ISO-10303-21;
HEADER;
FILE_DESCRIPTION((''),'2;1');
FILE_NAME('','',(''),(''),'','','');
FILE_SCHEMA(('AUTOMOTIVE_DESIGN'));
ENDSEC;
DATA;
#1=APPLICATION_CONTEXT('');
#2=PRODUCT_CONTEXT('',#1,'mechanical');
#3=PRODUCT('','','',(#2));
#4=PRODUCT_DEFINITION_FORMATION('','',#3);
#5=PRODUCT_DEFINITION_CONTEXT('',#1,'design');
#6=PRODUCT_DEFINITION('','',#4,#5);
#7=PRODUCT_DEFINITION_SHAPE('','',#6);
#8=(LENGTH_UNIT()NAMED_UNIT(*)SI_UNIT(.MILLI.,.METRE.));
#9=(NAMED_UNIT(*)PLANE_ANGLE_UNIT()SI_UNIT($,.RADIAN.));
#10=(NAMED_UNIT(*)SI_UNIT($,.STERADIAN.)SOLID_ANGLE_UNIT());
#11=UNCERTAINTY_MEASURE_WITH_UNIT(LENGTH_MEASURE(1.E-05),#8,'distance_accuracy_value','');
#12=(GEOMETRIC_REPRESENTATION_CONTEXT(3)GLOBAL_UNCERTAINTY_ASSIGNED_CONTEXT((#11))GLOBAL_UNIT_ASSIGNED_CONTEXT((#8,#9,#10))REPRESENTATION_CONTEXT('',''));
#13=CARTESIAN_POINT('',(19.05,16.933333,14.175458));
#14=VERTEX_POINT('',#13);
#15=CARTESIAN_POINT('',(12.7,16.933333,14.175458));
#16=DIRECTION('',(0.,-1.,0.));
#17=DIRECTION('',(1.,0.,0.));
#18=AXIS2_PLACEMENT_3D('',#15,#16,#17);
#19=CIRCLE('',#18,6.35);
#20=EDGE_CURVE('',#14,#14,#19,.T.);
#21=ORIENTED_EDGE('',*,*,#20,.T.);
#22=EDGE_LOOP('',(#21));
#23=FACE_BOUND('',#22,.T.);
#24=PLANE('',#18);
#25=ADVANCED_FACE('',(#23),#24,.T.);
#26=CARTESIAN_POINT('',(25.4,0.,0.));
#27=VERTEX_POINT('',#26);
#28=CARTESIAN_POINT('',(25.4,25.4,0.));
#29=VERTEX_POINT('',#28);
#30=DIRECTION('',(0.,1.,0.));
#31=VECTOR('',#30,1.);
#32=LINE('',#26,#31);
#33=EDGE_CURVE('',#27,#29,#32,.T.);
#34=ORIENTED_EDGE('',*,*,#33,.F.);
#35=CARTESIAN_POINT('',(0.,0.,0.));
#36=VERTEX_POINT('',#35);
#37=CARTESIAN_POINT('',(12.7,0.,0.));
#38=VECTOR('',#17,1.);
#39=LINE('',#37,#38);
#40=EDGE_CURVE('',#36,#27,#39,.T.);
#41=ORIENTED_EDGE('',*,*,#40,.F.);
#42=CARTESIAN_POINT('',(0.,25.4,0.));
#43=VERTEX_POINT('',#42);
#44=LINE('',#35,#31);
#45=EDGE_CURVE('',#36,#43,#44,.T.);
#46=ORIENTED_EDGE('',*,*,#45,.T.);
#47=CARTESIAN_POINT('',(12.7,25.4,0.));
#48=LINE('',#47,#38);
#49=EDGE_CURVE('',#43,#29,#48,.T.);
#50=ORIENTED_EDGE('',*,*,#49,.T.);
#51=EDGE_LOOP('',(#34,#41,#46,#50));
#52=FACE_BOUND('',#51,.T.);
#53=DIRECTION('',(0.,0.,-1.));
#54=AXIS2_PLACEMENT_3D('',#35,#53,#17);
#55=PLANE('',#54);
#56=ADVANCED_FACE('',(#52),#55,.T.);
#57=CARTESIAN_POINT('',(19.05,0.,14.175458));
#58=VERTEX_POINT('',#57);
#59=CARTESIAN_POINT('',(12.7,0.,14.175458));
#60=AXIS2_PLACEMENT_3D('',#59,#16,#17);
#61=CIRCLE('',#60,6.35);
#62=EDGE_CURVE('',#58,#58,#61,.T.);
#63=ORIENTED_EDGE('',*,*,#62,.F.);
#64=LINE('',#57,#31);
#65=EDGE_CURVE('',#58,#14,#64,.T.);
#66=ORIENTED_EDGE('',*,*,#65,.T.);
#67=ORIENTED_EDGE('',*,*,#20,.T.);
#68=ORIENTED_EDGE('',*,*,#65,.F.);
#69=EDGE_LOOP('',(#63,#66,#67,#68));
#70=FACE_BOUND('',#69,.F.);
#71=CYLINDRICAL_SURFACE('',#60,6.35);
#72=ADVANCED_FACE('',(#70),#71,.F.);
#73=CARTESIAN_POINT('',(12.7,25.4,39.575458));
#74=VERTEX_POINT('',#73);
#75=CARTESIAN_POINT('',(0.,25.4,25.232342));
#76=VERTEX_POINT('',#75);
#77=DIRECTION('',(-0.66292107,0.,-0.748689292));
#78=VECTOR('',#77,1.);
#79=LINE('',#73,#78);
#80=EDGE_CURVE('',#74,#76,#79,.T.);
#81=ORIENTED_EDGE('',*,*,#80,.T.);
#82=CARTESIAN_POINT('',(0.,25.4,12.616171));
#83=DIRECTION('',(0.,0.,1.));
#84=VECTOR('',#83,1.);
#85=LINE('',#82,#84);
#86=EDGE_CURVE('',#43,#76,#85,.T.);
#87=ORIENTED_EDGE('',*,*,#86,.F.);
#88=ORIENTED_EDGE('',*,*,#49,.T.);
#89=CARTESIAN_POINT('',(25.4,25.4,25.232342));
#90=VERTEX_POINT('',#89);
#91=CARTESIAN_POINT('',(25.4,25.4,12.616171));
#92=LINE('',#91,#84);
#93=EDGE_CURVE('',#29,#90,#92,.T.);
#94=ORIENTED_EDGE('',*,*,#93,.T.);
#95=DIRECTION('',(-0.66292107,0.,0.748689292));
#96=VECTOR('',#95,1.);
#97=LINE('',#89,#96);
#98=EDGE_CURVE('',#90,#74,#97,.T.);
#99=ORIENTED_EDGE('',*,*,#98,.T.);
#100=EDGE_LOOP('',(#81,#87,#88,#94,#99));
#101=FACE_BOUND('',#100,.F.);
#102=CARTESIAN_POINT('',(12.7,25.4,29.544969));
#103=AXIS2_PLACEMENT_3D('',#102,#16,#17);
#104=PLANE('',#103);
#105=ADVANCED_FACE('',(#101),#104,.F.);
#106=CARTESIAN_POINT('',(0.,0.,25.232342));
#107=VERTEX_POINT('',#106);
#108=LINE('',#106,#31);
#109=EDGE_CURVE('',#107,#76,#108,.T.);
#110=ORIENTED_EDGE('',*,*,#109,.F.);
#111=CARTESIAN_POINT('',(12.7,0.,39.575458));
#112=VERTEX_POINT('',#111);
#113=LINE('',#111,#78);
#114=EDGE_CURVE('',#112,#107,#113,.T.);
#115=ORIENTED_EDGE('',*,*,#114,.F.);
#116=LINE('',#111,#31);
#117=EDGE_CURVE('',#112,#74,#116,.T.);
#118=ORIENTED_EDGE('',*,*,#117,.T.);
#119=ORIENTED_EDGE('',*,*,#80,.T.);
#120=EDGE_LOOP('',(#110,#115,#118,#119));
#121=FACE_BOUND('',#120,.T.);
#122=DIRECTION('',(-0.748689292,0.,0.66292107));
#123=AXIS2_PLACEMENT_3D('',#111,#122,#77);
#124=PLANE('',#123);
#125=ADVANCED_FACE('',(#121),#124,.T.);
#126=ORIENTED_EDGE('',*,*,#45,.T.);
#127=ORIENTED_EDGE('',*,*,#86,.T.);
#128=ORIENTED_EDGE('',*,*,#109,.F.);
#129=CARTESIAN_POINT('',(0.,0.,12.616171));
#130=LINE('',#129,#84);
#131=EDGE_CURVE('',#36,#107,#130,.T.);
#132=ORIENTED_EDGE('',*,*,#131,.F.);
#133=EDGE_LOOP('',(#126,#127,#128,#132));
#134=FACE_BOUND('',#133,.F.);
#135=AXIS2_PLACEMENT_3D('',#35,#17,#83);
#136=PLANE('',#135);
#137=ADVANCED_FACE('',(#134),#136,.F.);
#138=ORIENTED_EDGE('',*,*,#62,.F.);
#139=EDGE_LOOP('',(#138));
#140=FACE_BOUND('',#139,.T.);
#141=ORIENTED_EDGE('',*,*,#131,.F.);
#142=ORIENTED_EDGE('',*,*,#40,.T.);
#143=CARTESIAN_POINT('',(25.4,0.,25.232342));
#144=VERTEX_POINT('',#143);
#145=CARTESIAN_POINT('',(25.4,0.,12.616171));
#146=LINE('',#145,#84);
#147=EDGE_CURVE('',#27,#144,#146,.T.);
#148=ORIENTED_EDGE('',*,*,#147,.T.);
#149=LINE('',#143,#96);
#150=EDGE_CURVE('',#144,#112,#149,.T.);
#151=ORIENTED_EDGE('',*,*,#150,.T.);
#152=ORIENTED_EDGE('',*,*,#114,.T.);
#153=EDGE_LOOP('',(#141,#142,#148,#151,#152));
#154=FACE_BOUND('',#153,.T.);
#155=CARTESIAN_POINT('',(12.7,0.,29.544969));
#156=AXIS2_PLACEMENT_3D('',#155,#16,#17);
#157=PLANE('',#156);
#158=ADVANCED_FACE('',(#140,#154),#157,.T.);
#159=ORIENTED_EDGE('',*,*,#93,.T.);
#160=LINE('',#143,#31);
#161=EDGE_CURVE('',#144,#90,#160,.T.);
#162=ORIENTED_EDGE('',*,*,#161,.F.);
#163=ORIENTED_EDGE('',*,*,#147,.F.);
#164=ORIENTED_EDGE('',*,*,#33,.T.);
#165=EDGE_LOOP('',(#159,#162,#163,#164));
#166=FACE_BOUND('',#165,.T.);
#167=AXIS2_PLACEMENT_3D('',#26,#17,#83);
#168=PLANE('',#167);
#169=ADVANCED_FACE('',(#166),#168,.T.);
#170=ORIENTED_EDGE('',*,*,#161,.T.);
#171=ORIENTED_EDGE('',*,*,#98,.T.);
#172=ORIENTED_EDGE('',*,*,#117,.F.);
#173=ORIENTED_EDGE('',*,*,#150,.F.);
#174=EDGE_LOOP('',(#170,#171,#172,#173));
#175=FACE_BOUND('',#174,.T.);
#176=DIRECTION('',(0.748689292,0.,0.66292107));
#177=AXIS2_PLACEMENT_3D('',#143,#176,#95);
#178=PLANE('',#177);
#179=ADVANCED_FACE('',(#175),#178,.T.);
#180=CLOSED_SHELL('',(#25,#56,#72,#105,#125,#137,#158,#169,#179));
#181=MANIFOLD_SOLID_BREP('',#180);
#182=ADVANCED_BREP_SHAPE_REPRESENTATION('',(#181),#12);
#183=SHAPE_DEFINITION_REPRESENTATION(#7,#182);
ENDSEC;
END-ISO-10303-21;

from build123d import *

# Parameters (mm, degrees)
F1_W     = 25.4
F1_H     = 25.2323417494
F2_DEPTH = 25.4
F3_R     = 6.35
F4_DEPTH = 16.9333333333


# Not quite as in the source:
# - the program builds the solid bodies; features that only make, move or delete a surface that nothing else refers to are left out


with BuildPart() as f2:
    # F1 (on Front) → F2 (new body)
    with BuildSketch(Plane.XZ):
        Polygon((12.7, 39.5754580502), (0, 25.2323417494), (25.4, 25.2323417494), align=None)
        with Locations((12.7, 12.6161708747)):
            Rectangle(F1_W, F1_H)
    extrude(amount=-F2_DEPTH)

    # F3 (on face) → F4 (cut)
    with BuildSketch(Plane.XZ):
        with Locations((12.7, 14.1754580502)):
            Circle(F3_R)
    extrude(amount=-F4_DEPTH, mode=Mode.SUBTRACT)


solid = f2.part
